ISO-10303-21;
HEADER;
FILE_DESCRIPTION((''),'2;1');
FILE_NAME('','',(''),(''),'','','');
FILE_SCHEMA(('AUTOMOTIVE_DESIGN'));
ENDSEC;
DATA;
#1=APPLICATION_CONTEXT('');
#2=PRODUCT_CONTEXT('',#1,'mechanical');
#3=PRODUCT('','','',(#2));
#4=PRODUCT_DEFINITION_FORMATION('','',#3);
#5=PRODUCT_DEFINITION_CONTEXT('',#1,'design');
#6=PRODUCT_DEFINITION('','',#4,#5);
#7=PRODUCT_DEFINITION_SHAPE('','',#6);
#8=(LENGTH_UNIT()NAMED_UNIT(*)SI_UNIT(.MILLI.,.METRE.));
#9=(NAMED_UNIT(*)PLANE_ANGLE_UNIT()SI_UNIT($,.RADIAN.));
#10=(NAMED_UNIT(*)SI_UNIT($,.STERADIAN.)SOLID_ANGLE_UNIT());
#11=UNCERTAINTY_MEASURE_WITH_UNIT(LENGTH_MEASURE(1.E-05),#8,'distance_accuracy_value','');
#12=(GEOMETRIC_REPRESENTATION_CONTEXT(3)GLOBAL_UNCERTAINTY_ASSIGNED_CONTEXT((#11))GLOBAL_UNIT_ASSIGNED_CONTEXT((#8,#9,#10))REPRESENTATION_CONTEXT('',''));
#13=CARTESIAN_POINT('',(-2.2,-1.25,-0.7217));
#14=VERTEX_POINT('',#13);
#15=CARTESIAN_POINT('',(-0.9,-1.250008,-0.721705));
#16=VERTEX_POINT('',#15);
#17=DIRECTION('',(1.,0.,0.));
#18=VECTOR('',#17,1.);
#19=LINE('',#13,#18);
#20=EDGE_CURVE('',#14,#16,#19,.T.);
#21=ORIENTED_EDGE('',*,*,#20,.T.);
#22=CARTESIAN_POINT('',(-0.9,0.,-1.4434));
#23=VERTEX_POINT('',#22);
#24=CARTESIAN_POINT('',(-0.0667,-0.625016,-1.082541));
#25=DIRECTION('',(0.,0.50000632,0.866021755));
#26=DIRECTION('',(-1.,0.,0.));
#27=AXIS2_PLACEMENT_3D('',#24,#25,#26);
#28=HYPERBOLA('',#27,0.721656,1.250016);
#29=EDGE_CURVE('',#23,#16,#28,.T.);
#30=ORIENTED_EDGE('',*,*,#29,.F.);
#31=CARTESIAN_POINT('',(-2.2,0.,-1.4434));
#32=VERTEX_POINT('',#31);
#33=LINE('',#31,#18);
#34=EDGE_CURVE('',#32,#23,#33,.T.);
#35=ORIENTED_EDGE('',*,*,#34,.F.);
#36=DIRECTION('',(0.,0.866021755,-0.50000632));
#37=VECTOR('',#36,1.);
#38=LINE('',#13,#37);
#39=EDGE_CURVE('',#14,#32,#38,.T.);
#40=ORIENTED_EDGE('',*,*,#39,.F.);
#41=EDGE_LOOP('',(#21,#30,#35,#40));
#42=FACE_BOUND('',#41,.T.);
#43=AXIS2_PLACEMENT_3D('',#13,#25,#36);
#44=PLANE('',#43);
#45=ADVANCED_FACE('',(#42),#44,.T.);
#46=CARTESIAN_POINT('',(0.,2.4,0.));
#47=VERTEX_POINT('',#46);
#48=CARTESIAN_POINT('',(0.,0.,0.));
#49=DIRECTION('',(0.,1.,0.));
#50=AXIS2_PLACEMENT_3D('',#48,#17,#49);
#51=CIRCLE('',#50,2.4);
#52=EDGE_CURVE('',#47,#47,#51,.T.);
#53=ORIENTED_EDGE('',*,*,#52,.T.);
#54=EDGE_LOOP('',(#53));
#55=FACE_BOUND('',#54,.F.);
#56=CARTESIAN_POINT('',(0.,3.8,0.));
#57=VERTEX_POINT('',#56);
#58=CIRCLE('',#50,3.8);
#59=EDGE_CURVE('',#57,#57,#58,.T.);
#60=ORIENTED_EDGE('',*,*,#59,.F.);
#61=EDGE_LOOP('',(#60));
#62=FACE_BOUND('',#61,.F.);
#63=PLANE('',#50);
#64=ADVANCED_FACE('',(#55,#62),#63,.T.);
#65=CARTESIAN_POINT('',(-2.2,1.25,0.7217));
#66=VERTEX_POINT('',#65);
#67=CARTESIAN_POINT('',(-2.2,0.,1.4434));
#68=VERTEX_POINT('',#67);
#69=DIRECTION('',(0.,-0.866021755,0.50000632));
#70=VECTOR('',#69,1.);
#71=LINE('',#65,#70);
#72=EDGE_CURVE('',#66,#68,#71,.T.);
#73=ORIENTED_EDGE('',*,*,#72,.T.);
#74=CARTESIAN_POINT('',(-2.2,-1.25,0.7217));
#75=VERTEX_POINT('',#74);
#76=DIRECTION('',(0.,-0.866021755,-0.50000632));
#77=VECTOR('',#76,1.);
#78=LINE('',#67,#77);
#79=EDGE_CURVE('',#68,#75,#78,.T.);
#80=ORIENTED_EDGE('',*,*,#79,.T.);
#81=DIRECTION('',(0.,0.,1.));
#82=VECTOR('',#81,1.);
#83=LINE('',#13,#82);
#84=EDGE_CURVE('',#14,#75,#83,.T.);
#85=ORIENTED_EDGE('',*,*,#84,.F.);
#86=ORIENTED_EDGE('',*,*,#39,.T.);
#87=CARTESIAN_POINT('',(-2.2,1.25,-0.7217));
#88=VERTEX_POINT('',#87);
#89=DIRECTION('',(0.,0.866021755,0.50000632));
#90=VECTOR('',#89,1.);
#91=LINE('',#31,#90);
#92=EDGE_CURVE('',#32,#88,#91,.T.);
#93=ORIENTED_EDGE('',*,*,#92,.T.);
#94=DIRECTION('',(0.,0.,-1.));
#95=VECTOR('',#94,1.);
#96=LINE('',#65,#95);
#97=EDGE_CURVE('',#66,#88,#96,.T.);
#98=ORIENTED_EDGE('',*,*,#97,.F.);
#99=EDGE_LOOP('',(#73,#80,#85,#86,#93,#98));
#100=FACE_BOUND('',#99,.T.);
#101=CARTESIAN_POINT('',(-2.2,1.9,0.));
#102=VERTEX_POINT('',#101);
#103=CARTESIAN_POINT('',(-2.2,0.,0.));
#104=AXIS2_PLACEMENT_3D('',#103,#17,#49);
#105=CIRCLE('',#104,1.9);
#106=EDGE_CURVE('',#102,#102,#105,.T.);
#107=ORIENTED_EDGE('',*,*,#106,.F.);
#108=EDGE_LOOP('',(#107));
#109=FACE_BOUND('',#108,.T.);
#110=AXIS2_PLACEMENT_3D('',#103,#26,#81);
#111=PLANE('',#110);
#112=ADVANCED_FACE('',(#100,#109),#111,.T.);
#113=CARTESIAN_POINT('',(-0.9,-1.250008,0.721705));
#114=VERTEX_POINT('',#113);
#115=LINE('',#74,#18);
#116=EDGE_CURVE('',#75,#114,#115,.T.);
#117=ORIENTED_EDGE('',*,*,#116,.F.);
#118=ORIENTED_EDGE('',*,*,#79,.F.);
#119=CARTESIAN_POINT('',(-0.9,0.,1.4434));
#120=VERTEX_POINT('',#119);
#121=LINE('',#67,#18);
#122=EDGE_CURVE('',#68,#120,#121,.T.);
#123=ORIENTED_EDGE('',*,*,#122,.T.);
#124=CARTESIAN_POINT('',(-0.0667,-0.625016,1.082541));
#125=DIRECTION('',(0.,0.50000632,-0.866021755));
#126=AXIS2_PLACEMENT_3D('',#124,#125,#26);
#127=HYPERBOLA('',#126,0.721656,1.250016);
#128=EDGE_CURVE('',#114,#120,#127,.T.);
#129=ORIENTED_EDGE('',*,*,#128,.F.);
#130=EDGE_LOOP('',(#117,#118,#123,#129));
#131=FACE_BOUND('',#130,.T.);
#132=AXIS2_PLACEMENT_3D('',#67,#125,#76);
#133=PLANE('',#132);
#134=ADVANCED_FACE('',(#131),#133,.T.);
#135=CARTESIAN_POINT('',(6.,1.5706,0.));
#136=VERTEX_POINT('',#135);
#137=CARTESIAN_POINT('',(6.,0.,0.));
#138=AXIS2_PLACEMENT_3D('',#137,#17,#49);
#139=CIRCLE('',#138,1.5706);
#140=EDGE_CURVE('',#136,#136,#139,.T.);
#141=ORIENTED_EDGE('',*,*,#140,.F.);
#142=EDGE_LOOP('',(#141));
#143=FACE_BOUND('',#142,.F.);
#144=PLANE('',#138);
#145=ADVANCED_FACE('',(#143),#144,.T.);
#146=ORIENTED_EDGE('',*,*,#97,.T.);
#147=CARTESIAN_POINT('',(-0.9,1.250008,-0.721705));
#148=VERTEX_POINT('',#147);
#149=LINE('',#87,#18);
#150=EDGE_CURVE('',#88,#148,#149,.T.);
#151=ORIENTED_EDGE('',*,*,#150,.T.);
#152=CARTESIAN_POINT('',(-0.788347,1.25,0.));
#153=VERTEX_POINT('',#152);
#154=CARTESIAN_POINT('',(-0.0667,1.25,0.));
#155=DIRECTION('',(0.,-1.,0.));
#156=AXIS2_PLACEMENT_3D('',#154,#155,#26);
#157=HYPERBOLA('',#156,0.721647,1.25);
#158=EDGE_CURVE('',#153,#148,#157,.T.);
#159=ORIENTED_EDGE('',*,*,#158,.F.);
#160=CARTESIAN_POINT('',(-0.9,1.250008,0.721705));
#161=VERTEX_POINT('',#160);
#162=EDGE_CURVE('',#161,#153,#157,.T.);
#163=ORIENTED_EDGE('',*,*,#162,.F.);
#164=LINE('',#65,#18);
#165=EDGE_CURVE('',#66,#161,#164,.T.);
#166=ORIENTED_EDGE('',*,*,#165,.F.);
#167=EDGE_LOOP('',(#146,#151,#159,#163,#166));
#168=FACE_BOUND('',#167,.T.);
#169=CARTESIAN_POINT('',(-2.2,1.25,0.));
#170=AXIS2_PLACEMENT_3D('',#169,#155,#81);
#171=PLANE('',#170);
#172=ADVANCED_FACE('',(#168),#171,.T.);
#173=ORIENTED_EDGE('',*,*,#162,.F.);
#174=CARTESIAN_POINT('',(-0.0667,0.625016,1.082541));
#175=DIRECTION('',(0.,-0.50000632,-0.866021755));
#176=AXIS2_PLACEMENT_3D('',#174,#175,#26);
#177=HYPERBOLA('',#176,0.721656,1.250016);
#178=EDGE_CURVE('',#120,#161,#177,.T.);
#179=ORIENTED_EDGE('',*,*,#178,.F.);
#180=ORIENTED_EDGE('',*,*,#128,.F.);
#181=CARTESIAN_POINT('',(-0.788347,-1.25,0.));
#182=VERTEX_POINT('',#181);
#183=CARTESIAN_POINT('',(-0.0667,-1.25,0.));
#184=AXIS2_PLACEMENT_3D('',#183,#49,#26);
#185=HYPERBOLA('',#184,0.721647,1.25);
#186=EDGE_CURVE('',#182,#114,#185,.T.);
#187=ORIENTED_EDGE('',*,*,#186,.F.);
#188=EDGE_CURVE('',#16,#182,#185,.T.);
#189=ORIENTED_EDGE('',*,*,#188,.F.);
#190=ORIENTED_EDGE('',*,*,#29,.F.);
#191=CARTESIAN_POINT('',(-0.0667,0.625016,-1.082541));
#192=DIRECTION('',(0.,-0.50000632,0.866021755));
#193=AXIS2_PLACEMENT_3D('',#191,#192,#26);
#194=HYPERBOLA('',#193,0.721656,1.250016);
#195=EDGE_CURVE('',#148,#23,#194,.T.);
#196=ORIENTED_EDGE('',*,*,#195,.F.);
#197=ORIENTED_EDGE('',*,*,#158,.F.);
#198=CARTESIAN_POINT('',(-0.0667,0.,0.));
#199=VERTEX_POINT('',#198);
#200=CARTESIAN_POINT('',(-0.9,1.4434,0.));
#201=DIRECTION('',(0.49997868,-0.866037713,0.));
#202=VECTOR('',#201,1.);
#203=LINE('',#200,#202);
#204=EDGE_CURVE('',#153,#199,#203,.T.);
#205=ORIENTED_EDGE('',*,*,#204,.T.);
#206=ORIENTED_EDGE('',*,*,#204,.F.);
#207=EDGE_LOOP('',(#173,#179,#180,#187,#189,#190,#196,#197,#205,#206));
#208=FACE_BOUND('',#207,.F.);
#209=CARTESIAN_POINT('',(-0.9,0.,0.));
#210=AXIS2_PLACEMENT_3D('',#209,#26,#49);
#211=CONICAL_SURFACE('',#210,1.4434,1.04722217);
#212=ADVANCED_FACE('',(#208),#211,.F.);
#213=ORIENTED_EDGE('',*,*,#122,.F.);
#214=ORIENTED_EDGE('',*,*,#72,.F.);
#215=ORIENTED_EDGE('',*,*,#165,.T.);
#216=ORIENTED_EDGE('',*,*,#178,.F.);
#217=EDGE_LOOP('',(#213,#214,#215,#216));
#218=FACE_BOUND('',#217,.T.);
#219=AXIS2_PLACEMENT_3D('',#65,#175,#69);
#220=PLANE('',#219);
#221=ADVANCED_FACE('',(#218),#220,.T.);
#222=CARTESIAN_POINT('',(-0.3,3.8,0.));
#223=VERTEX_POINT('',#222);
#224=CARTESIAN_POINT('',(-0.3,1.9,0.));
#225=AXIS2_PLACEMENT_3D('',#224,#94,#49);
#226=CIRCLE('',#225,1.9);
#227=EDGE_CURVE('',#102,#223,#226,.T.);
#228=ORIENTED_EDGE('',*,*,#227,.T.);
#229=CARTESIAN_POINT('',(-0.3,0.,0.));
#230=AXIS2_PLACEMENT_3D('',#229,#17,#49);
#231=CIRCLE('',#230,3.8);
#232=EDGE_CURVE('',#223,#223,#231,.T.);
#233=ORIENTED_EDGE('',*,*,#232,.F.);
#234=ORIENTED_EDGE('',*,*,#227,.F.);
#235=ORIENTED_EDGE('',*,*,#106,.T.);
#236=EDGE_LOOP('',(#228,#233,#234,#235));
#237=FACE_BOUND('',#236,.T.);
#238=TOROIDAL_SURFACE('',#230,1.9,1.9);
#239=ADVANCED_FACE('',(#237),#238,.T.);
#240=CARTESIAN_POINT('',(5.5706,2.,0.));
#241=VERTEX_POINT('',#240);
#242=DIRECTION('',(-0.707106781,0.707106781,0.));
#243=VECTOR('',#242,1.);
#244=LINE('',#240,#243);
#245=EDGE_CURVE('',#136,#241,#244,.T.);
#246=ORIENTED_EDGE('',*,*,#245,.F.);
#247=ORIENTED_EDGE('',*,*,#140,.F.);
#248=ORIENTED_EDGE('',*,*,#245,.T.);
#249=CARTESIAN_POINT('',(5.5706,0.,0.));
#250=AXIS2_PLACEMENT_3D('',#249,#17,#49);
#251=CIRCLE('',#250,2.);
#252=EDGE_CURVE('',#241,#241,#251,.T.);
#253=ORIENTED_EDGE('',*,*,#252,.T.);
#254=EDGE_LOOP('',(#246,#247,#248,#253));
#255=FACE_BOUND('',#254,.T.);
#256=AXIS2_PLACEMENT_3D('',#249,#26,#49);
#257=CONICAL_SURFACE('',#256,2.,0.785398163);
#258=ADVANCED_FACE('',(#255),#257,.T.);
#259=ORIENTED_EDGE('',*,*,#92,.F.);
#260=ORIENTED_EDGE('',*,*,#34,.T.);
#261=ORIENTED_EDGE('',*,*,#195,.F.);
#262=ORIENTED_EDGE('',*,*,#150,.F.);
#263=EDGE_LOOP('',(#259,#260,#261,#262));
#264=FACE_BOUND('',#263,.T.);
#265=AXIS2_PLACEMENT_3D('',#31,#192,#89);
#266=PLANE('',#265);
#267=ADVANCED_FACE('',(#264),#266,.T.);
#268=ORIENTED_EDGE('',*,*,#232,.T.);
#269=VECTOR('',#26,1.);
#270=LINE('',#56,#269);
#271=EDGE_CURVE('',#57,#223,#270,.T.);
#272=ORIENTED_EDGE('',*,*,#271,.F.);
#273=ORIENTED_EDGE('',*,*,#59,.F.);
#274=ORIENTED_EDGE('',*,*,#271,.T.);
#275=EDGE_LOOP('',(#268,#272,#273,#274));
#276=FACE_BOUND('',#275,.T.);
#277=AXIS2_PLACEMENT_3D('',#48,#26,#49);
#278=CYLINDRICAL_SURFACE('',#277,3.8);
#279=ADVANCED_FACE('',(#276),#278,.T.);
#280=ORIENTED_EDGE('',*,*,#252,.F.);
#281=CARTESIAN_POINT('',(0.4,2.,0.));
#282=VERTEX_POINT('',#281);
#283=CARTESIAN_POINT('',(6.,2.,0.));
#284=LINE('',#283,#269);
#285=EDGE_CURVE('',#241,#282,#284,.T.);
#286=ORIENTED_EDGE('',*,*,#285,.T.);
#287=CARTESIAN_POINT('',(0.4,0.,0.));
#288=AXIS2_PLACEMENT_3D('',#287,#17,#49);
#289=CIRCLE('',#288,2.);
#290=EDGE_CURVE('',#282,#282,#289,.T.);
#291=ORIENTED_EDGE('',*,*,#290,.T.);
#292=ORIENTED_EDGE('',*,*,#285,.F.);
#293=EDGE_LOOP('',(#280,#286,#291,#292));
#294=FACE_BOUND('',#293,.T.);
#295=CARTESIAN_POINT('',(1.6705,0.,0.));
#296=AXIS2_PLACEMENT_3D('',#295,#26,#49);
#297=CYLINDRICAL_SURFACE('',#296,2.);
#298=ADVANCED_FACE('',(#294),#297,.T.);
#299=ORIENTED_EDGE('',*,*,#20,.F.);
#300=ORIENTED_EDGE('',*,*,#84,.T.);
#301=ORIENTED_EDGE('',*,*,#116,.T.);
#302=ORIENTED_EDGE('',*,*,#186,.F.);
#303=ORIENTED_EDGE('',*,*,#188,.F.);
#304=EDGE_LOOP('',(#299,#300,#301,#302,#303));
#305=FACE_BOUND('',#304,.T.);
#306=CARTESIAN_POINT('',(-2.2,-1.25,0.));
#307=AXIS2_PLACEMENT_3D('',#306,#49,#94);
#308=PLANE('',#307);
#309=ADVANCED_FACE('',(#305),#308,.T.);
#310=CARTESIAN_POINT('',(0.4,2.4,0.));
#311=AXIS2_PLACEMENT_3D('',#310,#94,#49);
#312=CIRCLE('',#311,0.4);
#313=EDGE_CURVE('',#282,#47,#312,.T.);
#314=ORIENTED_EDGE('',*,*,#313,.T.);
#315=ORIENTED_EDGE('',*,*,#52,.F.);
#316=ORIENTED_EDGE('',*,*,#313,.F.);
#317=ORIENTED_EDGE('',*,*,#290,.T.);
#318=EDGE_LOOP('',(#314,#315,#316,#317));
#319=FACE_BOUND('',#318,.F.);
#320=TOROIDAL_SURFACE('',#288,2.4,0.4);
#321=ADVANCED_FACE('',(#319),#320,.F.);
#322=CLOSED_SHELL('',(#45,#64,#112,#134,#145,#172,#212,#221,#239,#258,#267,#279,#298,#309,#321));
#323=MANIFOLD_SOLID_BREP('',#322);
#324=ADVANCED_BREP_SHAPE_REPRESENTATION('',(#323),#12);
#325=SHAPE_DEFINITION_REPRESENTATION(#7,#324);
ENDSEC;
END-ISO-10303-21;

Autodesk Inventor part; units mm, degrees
ref_plane "YZ Plane" through (0, 0, 0) normal (1, 0, 0) x (0, 1, 0)
ref_plane "XZ Plane" through (0, 0, 0) normal (0, 1, 0) x (-1, 0, 0)
sketch "Sketch1" plane through (0, 0, 0) normal (0, 0, 1) x (1, 0, 0)
  line L0 (-0.0667, 0) -> (6, 0)
  line L1 (6, 0) -> (6, 2)
  line L2 (6, 2) -> (2.1, 2)
  line L3 (2.1, 2) -> (1.6705, 2)
  line L4 (1.6705, 2) -> (0, 2)
  line L5 (0, 2) -> (0, 3.8)
  line L6 (0, 3.8) -> (-2.2, 3.8)
  line L7 (-2.2, 3.8) -> (-2.2, 1.4434)
  line L8 (-2.2, 1.4434) -> (-0.9, 1.4434)
  line L9 (-0.9, 1.4434) -> (-0.0667, 0)
  line L10 (-3.84, 0) -> (7.64, 0) projected
  line L11 (0, -0.76) -> (0, 4.56) projected
  line L12 (2.1, 2) -> (0, 2) construction
  dimension "d1" = 3.9
  dimension "d2" = 0.4295
  dimension "d3" = 2.2
  dimension "d4" = 1.3
  dimension "d5" = 60
  dimension "d6" = 4
  dimension "d7" = 4
  dimension "d8" = 2.8868
  dimension "d9" = 7.6
  dimension "d26" = 6
revolve "Body" add sketch "Sketch1" angle 360 about axis through (-0.0667, 0, 0) along (1, 0, 0)
sketch "Sketch2" plane through (-2.2, 0, 0) normal (-1, 0, 0) x (0, 0, 1)
  circle A0 centre (0, 0) radius 1.4434 projected
  line L0 (0, -5.32) -> (0, 5.32) projected
  line L1 (-5.32, 0) -> (5.32, 0) projected
  line L2 (1.4434, 0) -> (0.7217, -1.25)
  line L3 (0.7217, -1.25) -> (-0.7217, -1.25)
  line L4 (-0.7217, -1.25) -> (-1.4434, 0)
  line L5 (-1.4434, 0) -> (-0.7217, 1.25)
  line L6 (-0.7217, 1.25) -> (0.7217, 1.25)
  line L7 (0.7217, 1.25) -> (1.4434, 0)
  point P0 (0, 0)
extrude "Slot" add sketch "Sketch2" against normal up to next contours L7 A0 | A0 L2 | L6 L0 A0 | A0 L0 L3 | L0 L6 A0 | A0 L3 L0 | L4 A0 | A0 L5
fillet "Fillet1" radius 1.9 1 edges at (-2.2, -3.8, 0)
thread "Thread" size "M4x0.7" class "6g" standard "ISO Metric profile" length 3.9
chamfer "Chamfer1" distance 0.4294 distance2 0.4294 1 edges at (6, -2, 0) measured on face at (6, 0.556, 0.0273)
ref_plane "Work Plane1" through (29, 0, 0) normal (0, -1, 0) x (1, 0, 0)
fillet "Fillet2" radius 0.4 1 edges at (0, -2, 0)
equation "\"d30\" = R"
equation "\"d17\" = RR"
equation "\"d13\" = GEL"
equation "\"d15\" = -0.5 * SPD + 0.5 * GD"
equation "\"d16\" = GUL"
equation "\"d1\" = GEL"
equation "\"d3\" = KOH"
equation "\"d4\" = INTI"
equation "\"d6\" = GD"
equation "\"d7\" = BDM"
equation "\"d8\" = 1.1547 * SW"
equation "\"d9\" = KOD"
equation "\"d26\" = NLG"
equation "\"GD\" = NND"
equation "\"NLG\" = 6"
equation "\"GEL\" = 3.9"
equation "\"KOD\" = 7.6"
equation "\"KOH\" = 2.2"
equation "\"INTI\" = 1.3"
equation "\"GAL\" = 0.61345 * PTC"
equation "\"GUL\" = 0.61345 * PTC"
equation "\"BDM\" = NND"
equation "\"SW\" = 2.5"
equation "\"RR\" = 1.9"
equation "\"SPD\" = NND - 1.2269 * PTC"
equation "\"R\" = 0.4"
equation "\"TOA\" = 30deg"
equation "\"GD1\" = THREADDIA - 1.2269 * PTC"
equation "\"THREADDIA\" = 4"
equation "\"PTC\" = 0.7"
equation "\"NND\" = 4"
equation "\"KOH1\" = 0.3"
equation "\"E0\" = 2.873"
properties part number "ISO 7380-1 - M4 x 6" material "Steel"
